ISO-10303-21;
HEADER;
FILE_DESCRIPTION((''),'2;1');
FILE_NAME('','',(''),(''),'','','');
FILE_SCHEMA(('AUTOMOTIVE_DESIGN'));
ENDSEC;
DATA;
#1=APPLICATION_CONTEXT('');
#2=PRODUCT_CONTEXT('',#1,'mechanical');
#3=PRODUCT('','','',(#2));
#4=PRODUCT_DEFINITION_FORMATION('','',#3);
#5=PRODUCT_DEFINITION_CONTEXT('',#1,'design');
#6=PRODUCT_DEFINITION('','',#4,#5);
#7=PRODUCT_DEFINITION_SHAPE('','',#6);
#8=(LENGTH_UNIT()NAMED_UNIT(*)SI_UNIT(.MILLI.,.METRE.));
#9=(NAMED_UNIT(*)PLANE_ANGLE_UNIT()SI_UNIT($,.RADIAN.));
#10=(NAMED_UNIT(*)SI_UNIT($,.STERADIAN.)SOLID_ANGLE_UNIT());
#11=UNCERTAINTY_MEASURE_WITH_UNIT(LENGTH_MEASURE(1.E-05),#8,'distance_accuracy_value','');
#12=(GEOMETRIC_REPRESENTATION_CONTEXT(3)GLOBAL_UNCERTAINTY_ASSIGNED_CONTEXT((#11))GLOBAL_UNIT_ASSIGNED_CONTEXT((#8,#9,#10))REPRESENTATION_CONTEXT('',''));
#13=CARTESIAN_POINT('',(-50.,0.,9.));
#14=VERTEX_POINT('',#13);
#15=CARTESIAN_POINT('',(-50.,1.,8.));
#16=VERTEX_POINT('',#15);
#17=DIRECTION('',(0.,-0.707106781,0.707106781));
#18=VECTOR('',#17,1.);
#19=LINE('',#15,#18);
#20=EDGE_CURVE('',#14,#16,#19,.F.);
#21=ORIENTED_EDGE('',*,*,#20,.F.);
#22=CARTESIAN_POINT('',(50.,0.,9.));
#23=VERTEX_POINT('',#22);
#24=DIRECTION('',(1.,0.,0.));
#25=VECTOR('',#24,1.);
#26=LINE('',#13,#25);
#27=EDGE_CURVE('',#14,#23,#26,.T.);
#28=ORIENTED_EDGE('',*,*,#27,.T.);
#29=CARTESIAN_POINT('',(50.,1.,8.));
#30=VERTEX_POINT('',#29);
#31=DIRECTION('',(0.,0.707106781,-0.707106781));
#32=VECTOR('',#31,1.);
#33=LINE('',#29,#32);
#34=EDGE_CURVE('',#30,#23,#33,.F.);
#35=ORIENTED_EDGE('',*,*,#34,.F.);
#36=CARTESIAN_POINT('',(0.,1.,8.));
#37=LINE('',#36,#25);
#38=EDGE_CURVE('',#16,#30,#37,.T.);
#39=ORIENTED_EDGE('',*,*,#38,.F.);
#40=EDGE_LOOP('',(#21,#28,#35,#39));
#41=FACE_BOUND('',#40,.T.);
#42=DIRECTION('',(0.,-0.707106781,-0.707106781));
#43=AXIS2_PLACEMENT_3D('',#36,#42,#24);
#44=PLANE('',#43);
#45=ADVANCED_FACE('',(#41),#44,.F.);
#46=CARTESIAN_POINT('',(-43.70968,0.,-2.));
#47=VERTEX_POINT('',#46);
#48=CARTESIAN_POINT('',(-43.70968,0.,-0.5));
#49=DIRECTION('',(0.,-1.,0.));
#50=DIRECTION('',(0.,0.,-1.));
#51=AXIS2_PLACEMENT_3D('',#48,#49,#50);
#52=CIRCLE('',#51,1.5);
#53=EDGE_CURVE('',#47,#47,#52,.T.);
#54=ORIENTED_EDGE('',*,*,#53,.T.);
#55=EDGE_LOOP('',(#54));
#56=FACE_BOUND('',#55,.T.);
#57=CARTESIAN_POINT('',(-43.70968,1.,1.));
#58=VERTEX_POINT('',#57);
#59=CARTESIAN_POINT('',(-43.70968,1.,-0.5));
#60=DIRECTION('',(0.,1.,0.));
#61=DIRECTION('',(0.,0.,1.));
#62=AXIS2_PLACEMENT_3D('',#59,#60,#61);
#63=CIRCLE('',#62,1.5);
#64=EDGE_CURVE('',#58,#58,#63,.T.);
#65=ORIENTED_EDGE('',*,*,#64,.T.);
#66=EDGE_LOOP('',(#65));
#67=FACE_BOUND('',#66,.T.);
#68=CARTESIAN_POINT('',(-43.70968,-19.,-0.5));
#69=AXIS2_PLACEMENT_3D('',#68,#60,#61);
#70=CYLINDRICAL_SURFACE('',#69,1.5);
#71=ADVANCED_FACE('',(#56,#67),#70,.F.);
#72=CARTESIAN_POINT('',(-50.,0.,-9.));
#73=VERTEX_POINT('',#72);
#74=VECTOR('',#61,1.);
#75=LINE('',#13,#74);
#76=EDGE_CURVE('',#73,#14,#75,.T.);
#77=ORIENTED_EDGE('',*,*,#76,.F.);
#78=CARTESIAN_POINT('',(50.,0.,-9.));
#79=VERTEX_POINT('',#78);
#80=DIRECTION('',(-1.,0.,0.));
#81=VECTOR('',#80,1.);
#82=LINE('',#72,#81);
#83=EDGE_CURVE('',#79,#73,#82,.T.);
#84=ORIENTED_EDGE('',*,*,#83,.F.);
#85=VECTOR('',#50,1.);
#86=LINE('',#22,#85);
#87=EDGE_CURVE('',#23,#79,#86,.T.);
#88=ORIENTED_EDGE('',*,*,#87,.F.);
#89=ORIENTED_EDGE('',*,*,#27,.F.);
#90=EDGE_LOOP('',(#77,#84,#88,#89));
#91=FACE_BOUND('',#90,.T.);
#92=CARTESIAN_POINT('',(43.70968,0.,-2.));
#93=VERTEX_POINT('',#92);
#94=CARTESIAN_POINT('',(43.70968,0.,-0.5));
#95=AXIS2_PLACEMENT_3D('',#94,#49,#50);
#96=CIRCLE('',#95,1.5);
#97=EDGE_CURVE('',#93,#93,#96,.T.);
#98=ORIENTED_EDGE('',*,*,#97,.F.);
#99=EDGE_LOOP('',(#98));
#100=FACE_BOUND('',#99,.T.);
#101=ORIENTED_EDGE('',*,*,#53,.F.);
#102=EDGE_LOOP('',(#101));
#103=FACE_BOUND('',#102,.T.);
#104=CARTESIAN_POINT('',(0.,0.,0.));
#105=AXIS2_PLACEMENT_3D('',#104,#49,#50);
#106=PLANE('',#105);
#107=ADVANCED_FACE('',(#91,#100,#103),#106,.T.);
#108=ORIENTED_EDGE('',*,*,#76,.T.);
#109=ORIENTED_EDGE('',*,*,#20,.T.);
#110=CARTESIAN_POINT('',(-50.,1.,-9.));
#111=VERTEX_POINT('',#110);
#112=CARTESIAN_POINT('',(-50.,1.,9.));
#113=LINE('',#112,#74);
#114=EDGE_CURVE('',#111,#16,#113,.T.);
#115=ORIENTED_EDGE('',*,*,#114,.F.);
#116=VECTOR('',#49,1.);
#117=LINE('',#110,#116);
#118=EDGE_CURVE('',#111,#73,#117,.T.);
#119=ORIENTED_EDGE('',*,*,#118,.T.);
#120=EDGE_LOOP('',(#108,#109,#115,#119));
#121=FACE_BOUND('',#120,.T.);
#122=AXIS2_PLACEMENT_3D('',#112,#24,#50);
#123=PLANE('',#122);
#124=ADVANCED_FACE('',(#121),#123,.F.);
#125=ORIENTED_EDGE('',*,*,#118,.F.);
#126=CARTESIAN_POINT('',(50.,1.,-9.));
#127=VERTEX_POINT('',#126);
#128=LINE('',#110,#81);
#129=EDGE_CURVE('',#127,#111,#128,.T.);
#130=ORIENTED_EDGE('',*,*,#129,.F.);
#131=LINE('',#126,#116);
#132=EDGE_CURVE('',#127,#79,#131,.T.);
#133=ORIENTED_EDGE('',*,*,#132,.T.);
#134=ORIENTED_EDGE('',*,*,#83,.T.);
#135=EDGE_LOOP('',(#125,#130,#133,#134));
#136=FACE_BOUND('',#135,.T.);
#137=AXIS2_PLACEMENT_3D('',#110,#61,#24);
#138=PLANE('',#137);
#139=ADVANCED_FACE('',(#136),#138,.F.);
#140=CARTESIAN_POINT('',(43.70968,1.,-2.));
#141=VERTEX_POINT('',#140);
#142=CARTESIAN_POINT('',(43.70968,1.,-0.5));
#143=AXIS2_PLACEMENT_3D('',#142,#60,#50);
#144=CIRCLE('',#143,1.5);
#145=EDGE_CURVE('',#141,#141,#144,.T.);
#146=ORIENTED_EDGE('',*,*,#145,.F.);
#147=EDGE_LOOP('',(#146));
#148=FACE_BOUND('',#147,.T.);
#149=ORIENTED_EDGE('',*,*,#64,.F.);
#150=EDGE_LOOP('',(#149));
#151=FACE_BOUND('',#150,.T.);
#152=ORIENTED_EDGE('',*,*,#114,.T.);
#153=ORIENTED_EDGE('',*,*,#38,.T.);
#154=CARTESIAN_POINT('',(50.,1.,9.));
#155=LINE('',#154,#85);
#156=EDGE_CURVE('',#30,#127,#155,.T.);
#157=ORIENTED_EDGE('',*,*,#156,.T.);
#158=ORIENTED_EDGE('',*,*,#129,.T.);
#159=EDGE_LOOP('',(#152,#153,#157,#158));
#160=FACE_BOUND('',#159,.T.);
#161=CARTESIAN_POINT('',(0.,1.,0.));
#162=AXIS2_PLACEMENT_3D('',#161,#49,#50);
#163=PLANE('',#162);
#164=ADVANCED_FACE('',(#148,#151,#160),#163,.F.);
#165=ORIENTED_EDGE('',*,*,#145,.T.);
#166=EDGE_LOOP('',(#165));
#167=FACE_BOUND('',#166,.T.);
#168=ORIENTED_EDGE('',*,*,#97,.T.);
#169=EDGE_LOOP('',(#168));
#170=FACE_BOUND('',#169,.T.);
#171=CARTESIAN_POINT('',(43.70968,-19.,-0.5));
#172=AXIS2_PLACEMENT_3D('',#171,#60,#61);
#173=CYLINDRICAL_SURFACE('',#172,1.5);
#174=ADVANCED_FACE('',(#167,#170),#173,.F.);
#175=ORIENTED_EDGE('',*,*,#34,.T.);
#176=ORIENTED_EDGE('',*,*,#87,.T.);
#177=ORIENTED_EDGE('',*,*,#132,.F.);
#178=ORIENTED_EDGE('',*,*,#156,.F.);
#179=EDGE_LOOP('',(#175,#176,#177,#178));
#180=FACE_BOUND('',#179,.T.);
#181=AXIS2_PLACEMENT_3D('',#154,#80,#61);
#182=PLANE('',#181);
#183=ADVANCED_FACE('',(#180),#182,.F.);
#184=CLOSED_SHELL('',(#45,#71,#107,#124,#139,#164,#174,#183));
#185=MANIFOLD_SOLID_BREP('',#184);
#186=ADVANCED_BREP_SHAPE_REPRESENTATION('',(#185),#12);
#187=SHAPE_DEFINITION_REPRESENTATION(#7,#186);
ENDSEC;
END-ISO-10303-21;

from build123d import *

# Parameters (mm, degrees)
SKETCH_1_W          = 100
SKETCH_1_H          = 18
EXTRUDE_1_DEPTH     = 1
CHAMFER_1_SIZE      = 1
SKETCH_3_R          = 1.5
CUT_EXTRUDE_2_DEPTH = 20


with BuildPart() as part:
    # Эскиз1 → Бобышка-Вытянуть1 (new body)
    with BuildSketch(Plane(origin=(0, 0, 0), x_dir=(1, 0, 0), z_dir=(0, 1, 0))):
        Rectangle(SKETCH_1_W, SKETCH_1_H)
    extrude(amount=EXTRUDE_1_DEPTH)

    # Фаска1
    chamfer_1_edges = [part.edges().sort_by_distance(p)[0] for p in [
        (0, 1, 9),
    ]]
    chamfer(chamfer_1_edges, length=CHAMFER_1_SIZE - 0.0001)  # a hair under: the kernel refuses the full size

    # Эскиз3 → Вырез-Вытянуть2 (cut)
    with BuildSketch(Plane(origin=(0, 1, 0), x_dir=(1, 0, 0), z_dir=(0, 1, 0))):
        with Locations(Location((-43.709679881, 0.5, 0), (0, 0, 270))):
            Circle(SKETCH_3_R)
        with Locations(Location((43.709679881, 0.5, 0), (0, 0, 90))):
            Circle(SKETCH_3_R)
    extrude(amount=-CUT_EXTRUDE_2_DEPTH, mode=Mode.SUBTRACT)


solid = part.part
